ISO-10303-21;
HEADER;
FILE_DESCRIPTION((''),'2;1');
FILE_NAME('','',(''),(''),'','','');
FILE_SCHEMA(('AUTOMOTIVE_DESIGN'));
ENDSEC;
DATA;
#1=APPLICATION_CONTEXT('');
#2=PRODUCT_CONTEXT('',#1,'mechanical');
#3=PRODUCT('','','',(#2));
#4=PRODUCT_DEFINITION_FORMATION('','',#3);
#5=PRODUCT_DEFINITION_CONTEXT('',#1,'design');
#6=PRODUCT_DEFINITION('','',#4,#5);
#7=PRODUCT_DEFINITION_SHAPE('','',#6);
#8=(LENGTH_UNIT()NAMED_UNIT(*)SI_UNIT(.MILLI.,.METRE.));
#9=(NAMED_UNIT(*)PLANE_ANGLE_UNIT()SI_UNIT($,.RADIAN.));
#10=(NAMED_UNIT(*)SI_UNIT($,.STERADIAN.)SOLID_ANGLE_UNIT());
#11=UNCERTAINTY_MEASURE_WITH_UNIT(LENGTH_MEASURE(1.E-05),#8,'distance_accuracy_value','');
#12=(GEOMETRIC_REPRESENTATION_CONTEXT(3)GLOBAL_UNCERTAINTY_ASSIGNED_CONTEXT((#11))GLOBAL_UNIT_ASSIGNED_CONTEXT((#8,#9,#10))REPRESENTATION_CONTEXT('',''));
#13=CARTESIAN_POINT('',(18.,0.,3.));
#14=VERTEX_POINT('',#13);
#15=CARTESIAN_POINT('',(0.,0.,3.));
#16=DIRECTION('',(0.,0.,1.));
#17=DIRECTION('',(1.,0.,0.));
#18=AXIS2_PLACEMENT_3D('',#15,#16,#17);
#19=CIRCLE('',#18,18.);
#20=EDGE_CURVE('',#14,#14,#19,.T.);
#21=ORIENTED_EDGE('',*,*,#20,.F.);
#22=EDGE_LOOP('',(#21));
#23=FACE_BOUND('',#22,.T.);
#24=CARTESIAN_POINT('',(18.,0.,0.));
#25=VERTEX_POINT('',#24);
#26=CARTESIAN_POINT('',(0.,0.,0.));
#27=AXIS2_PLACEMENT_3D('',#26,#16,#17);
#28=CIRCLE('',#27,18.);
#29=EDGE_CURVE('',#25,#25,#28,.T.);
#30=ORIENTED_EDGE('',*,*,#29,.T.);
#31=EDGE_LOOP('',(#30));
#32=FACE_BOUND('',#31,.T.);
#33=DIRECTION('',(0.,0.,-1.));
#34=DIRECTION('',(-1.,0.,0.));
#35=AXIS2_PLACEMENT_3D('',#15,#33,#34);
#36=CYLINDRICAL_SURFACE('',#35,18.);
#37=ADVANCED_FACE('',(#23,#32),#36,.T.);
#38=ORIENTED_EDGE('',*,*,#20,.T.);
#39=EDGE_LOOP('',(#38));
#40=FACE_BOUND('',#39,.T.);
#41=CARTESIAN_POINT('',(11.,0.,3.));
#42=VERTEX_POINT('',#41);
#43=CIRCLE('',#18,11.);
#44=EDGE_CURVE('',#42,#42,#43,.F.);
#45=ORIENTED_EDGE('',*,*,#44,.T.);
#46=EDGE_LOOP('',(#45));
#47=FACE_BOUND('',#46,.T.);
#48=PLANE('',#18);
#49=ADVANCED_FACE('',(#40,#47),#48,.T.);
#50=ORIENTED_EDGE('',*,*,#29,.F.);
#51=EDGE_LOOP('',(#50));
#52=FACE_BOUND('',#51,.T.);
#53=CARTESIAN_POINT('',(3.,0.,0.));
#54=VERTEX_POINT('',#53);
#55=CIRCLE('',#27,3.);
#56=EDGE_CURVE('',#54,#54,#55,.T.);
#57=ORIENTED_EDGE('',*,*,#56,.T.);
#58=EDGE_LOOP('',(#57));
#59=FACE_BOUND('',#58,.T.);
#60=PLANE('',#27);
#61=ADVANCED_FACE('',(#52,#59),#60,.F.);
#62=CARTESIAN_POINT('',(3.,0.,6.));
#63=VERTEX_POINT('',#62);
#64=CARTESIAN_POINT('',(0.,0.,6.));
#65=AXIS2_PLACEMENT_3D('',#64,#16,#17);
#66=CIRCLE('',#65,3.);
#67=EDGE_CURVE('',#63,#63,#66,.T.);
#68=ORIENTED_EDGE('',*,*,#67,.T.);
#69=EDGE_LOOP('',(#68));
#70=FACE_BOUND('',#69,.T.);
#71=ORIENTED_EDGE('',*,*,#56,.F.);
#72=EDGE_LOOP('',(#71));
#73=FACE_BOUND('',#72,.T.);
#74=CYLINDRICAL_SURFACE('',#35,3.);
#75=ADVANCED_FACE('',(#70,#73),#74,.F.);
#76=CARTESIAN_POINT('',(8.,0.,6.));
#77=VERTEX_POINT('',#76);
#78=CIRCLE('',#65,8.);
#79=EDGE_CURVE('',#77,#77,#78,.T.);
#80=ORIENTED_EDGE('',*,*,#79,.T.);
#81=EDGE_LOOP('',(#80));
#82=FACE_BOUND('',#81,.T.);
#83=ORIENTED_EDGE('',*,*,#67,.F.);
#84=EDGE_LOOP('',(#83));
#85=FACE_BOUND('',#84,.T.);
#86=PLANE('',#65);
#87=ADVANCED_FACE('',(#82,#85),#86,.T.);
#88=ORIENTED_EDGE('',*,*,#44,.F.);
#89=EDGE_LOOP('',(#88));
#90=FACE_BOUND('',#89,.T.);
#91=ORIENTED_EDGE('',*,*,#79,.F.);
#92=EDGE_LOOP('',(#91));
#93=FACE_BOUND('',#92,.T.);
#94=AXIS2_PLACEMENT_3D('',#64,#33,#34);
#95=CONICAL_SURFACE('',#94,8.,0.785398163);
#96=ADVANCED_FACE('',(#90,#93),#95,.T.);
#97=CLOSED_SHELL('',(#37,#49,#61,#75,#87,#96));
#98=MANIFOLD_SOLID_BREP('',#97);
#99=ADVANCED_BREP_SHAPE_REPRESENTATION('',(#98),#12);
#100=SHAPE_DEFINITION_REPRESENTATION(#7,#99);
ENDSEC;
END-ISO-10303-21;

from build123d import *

# Parameters (mm, degrees)
ESQUISSE1_R        = 18
ESQUISSE1_R_2      = 3
BOSS_EXTRU_1_DEPTH = 3
ESQUISSE2_R        = 13
ESQUISSE2_R_2      = 3
BOSS_EXTRU_2_DEPTH = 3
CHANFREIN1_SIZE    = 5


with BuildPart() as part:
    # Esquisse1 → Boss.-Extru.1 (new body)
    with BuildSketch(Plane.XY):
        Circle(ESQUISSE1_R)
        Circle(ESQUISSE1_R_2, mode=Mode.SUBTRACT)
    extrude(amount=BOSS_EXTRU_1_DEPTH)

    # Esquisse2 → Boss.-Extru.2 (add)
    with BuildSketch(Plane.XY.offset(3)):
        Circle(ESQUISSE2_R)
        Circle(ESQUISSE2_R_2, mode=Mode.SUBTRACT)
    extrude(amount=BOSS_EXTRU_2_DEPTH)

    # Chanfrein1
    # the kernel refuses this chamfer: 5 mm, written as the material it takes off along each edge
    with BuildSketch(Plane(origin=(0, 0, 6), x_dir=(1, 0, 0), z_dir=(0, -1, 0))) as chanfrein1_piece_1_section:
        Polygon((13, -CHANFREIN1_SIZE), (13 - CHANFREIN1_SIZE, 0), (13, 0), align=None)
    chanfrein1_piece_1 = revolve(axis=Axis((0, 0, 6), (0, 0, 1)), mode=Mode.PRIVATE)
    chanfrein1_piece_1 = split(chanfrein1_piece_1, bisect_by=Plane(origin=(-9.494850826, 0, 3), z_dir=(0, 0, 1)), keep=Keep.TOP, mode=Mode.PRIVATE)
    add(chanfrein1_piece_1, mode=Mode.SUBTRACT)


solid = part.part
